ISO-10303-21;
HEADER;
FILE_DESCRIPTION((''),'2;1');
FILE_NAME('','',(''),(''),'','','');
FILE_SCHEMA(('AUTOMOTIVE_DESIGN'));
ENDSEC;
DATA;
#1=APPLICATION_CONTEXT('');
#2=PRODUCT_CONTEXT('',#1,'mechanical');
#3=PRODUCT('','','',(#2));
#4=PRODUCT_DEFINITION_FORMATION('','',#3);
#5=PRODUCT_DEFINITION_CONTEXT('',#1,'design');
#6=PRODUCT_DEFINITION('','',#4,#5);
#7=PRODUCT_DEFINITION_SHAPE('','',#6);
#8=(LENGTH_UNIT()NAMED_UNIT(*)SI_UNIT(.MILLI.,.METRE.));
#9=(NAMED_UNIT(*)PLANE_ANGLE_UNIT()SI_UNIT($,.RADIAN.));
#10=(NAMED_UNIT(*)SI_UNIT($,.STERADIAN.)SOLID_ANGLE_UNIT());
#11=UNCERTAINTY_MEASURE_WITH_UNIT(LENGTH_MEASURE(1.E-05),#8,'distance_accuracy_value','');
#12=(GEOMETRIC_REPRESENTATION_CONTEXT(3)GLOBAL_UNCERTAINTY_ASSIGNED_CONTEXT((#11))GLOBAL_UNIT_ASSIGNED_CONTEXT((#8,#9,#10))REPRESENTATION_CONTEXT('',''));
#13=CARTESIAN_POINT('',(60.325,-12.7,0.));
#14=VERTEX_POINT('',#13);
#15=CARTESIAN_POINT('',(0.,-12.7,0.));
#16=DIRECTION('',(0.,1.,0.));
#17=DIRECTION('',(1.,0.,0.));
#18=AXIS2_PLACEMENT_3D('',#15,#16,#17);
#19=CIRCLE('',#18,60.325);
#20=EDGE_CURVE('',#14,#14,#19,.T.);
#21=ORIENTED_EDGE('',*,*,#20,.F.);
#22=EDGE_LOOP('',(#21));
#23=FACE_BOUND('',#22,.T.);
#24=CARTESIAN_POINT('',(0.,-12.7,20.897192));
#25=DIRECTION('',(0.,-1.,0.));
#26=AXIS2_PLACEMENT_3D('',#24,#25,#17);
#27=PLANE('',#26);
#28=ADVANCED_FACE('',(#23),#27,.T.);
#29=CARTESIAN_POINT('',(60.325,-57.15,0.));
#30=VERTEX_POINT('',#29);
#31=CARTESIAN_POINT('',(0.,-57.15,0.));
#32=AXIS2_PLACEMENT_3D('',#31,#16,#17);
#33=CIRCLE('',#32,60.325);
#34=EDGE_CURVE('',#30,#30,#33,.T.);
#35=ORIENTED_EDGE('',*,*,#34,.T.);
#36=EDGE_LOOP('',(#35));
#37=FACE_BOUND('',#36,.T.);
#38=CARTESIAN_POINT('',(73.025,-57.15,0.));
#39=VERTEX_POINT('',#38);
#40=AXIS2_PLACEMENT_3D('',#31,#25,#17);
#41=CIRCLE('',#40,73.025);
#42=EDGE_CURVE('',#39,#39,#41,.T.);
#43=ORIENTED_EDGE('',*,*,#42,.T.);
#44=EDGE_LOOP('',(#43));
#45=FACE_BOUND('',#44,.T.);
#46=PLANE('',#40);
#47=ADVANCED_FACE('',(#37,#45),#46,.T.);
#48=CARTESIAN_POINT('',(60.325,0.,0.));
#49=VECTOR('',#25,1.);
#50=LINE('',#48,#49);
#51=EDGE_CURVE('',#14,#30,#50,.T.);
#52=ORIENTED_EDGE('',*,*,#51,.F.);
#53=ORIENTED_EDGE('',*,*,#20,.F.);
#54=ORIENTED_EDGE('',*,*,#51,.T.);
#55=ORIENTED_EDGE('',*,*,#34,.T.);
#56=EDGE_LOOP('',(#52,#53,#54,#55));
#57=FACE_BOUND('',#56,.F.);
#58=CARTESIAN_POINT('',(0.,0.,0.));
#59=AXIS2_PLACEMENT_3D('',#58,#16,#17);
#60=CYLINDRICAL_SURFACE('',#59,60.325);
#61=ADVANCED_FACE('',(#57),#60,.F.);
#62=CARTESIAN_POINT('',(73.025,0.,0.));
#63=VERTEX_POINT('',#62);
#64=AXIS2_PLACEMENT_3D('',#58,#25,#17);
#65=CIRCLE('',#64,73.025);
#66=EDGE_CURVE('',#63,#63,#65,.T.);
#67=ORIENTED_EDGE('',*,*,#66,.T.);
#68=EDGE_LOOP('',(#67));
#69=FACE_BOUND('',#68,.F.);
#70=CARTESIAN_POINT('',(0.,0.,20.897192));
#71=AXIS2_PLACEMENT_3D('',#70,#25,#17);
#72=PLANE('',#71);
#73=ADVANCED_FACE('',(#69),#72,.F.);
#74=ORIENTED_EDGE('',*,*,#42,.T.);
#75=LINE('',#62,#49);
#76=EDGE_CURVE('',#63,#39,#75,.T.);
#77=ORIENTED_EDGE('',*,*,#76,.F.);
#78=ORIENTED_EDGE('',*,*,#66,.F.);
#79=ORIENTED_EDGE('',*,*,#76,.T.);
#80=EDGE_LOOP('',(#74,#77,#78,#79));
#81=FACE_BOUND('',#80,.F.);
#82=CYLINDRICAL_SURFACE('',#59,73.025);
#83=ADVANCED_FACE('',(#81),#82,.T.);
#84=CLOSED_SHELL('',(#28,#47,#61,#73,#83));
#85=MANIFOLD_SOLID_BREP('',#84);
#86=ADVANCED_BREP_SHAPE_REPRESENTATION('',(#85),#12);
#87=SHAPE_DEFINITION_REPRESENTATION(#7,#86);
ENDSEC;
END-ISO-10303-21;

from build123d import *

# Parameters (mm, degrees)
F0_R     = 73.025
F1_DEPTH = 57.15
F2_DEPTH = 12.7


# Not quite as in the source:
# - ends of sketch curves that miss each other by under 0.0002 mm in the source are joined
# - the program builds the solid bodies; features that only make, move or delete a surface that nothing else refers to are left out


with BuildPart() as f1:
    # F0 (on Front) → F1 (new body)
    with BuildSketch(Plane.XZ):
        Circle(F0_R)
        with BuildLine():
            ThreePointArc((-60.325, 0), (0, 60.325), (60.325, 0))
            ThreePointArc((60.325, 0), (0, -60.325), (-60.325, 0))
        make_face(mode=Mode.SUBTRACT)
    extrude(amount=F1_DEPTH)

    # F0 (on Front) → F2 (join)
    with BuildSketch(Plane.XZ):
        with BuildLine():
            Line((-60.325, -1.5561e-06), (60.325, -1.5561e-06))
            ThreePointArc((60.325, -1.5561e-06), (0, 60.325), (-60.325, -1.5561e-06))
        make_face()
        with BuildLine():
            ThreePointArc((-60.325, 0), (0, -60.325), (60.325, 0))
            Line((60.325, 0), (-60.325, 0))
        make_face()
    extrude(amount=F2_DEPTH)


solid = f1.part
